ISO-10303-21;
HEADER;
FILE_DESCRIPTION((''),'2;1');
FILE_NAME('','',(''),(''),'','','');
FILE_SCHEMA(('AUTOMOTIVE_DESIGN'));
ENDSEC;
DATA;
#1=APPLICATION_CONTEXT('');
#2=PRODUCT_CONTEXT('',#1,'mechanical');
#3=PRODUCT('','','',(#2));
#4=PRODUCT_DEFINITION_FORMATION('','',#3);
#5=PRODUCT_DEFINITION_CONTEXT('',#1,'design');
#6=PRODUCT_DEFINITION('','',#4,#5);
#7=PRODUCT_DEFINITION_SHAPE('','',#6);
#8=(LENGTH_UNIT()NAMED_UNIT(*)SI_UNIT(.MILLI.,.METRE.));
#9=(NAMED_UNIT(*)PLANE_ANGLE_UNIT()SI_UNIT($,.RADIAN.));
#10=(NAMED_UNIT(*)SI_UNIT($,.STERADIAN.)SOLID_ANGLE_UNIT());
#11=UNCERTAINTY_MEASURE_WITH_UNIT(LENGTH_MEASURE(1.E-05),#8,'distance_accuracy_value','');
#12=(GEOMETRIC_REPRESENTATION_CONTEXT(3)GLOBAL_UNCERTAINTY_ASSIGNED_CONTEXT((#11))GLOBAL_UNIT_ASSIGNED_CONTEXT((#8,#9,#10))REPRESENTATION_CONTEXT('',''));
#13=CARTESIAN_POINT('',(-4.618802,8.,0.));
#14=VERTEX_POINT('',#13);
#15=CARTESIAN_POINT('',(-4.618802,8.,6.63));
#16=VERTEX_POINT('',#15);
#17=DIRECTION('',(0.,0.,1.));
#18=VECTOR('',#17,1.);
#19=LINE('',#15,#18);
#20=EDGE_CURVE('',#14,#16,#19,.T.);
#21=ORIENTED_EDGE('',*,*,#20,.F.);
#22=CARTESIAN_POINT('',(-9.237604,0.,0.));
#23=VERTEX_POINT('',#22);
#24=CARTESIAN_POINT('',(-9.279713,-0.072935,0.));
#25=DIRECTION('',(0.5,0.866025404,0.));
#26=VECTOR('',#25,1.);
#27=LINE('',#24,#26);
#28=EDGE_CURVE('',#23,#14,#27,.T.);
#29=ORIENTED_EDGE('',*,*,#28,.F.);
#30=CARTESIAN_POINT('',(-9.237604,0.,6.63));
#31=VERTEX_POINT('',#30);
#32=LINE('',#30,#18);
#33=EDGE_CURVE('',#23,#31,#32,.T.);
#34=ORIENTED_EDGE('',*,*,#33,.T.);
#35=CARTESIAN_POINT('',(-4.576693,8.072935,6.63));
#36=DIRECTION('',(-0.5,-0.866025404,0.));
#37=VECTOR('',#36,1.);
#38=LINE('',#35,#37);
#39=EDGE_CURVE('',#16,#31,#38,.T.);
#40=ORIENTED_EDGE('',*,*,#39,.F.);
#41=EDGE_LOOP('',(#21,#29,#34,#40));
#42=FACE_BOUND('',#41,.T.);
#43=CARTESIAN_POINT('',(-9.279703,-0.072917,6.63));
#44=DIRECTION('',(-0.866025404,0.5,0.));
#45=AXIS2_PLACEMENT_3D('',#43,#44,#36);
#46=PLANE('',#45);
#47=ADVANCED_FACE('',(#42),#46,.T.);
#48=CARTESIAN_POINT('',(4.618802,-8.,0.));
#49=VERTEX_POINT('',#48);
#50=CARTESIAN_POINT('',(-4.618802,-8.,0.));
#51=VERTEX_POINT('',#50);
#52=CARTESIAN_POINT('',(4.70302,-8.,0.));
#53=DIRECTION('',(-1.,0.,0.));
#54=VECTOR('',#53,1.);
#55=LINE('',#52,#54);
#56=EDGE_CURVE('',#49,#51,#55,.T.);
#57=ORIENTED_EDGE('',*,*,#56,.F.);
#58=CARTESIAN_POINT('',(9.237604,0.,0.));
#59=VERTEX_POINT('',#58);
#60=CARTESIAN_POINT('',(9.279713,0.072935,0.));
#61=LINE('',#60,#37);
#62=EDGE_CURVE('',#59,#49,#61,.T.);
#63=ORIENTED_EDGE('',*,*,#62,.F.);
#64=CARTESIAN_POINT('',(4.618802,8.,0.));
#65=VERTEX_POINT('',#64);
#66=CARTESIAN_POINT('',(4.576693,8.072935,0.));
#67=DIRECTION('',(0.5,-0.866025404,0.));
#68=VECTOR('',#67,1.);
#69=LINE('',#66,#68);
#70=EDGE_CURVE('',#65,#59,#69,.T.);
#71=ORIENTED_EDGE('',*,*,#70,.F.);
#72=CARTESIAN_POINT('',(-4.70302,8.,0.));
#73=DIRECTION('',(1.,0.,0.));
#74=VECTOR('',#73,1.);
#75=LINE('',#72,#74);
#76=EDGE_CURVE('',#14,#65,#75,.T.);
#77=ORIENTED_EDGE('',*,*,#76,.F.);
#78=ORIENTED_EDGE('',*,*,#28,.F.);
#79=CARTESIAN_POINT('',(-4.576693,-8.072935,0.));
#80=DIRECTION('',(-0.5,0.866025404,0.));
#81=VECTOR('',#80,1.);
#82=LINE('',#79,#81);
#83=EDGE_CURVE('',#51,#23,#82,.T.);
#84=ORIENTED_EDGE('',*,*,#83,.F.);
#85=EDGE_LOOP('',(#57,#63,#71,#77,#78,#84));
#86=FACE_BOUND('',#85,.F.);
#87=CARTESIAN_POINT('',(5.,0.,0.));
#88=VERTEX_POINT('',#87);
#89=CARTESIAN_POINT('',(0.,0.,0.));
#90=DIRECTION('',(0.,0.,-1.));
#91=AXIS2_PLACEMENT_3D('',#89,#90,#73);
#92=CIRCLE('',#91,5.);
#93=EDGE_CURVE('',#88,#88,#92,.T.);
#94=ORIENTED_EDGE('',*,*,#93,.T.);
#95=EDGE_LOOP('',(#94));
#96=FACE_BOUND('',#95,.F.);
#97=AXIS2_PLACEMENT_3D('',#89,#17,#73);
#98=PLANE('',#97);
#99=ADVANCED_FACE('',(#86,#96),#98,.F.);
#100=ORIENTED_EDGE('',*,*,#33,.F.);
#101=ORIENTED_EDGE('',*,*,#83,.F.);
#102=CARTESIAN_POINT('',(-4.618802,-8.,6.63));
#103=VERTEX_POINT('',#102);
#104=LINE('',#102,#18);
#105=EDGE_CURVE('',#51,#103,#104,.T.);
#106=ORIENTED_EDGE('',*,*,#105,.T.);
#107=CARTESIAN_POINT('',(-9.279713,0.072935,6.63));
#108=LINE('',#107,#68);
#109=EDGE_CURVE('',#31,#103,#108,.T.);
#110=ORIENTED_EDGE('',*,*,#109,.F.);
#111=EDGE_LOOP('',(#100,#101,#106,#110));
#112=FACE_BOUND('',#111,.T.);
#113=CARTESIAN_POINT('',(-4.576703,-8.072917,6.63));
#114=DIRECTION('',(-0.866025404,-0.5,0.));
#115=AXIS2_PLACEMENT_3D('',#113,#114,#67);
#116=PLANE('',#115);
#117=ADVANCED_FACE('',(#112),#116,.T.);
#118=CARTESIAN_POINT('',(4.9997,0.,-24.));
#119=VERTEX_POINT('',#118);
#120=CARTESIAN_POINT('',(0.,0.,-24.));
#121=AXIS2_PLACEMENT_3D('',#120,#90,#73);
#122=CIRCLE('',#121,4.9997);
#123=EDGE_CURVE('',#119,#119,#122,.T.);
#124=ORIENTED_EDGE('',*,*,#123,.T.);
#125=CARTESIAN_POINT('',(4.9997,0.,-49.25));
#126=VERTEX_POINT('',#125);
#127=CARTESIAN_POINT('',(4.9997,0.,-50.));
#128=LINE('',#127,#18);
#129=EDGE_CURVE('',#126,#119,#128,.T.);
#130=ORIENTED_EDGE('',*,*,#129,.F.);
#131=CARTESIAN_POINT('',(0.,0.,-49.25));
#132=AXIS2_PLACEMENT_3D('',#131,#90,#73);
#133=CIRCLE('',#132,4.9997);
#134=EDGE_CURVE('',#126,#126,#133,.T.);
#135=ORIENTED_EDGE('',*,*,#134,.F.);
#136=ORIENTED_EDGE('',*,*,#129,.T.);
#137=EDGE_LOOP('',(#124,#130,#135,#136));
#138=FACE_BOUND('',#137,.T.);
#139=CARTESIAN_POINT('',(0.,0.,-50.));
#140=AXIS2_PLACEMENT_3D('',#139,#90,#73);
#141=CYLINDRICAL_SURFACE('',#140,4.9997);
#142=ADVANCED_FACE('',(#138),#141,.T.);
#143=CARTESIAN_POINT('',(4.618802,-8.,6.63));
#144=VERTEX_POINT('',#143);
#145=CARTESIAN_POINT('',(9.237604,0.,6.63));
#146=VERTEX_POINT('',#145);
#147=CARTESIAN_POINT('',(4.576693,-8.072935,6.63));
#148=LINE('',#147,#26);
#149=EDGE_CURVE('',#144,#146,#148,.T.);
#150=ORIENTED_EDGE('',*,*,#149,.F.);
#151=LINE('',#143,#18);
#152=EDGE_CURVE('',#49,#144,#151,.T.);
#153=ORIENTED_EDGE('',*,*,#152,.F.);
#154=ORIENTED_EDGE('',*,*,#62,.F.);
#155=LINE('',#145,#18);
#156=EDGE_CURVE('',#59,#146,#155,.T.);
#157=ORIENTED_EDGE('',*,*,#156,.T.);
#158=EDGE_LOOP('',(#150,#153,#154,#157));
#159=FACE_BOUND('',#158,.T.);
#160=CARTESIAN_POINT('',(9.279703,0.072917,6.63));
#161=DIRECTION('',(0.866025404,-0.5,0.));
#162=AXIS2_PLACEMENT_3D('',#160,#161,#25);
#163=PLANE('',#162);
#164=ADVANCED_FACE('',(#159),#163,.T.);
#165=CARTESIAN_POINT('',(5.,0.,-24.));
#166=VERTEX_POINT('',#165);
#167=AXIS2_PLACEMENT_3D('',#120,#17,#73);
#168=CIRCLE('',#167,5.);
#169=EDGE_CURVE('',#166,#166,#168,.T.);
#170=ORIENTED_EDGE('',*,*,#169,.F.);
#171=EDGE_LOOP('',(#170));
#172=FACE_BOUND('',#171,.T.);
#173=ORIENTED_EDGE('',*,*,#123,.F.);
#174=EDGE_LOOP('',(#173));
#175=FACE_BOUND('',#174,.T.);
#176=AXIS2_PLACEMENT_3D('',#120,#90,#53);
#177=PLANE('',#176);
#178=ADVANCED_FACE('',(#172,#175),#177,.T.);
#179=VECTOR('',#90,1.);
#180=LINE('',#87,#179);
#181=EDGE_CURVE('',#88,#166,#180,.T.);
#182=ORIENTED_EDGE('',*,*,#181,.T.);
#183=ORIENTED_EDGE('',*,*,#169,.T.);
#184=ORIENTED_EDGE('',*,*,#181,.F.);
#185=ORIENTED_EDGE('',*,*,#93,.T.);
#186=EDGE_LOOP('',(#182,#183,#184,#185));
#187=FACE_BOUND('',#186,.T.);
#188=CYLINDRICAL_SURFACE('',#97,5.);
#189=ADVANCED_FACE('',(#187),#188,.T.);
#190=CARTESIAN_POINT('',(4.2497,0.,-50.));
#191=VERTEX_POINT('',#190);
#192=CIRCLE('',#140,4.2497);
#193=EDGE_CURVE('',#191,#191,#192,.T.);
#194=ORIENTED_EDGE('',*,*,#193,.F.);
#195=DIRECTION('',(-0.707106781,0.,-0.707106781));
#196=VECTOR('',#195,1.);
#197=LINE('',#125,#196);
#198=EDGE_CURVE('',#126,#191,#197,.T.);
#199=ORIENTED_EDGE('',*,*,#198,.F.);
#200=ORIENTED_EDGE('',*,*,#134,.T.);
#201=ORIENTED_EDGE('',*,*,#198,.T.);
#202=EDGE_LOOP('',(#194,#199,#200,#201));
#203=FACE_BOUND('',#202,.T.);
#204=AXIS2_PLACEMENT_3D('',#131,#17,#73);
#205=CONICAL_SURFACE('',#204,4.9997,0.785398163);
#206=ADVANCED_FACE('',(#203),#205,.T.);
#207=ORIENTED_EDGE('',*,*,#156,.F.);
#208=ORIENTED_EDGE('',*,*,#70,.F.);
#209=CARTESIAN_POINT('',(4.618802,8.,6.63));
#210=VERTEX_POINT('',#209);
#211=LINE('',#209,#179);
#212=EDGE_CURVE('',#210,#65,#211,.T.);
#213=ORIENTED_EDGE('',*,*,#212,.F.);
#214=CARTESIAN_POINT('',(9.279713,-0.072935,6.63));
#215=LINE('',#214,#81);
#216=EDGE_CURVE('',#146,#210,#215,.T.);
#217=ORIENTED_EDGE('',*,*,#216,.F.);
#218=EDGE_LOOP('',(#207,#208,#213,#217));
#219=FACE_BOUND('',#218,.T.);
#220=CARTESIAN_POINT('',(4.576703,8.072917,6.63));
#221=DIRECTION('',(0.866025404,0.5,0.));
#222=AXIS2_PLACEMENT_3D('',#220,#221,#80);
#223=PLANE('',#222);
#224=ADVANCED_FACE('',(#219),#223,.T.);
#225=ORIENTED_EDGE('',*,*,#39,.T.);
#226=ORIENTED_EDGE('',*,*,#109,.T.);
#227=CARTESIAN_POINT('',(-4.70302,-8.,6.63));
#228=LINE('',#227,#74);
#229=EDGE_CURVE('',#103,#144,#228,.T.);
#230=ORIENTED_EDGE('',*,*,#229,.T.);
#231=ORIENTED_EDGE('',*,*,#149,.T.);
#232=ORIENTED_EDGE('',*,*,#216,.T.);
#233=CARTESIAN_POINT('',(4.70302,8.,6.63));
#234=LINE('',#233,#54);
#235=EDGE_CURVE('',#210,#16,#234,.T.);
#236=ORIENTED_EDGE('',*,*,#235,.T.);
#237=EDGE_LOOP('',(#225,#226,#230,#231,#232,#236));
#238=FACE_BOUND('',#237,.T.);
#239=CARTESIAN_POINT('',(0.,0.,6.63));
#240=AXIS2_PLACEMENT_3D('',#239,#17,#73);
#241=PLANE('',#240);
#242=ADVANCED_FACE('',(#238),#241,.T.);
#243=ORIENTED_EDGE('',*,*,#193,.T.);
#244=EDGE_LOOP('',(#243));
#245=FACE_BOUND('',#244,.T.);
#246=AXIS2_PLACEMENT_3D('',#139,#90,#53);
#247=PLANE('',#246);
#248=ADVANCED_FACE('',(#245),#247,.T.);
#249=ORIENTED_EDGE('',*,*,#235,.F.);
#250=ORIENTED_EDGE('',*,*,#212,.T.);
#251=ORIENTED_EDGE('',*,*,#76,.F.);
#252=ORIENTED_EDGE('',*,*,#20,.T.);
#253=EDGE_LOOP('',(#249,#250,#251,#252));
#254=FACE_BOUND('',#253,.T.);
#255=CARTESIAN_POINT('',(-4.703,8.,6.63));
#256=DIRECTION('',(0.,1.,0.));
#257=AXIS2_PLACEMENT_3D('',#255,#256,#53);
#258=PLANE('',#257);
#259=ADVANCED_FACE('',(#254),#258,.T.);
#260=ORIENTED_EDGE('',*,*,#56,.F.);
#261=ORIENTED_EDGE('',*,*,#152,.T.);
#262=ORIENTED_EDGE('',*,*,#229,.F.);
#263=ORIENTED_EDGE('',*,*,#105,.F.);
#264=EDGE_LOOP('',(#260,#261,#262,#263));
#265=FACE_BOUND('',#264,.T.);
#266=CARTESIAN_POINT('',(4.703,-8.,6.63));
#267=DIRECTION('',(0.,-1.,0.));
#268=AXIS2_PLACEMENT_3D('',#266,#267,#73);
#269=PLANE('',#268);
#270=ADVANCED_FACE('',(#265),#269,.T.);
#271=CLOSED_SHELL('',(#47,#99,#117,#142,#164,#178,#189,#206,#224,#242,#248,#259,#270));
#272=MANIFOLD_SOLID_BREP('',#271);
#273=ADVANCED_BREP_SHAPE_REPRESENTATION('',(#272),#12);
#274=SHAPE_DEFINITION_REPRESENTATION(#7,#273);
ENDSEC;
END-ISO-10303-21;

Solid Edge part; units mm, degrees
sketch "Sketch1" plane through (0, 0, 0) normal (0, 0, 1) x (1, 0, 0)
  circle A0 centre (0, 0) radius 9.28
  dimension "D1" = 18.56
extrude "Protrusion1" add sketch "Sketch1" along normal blind 6.63
sketch "Sketch2" plane through (0, 0, 0) normal (0, 0, -1) x (1, 0, 0)
  circle A0 centre (0, 0) radius 5
extrude "Protrusion2" add sketch "Sketch2" along normal blind 50
sketch "Sketch3" plane through (0, 0, -50) normal (0, 0, -1) x (1, 0, 0)
  circle A0 centre (0, 0) radius 4.9997
extrude "Cutout1" cut sketch "Sketch3" against normal blind 26 flip side to cut
chamfer "Chamfer_1" distance 0.75 angle 45 1 edges at (-4.9997, 0, -50)
sketch "Sketch4" plane through (0, 0, 6.63) normal (0, 0, 1) x (1, 0, 0)
  line L0 (-4.703, 8) -> (4.703, 8)
  dimension "D1" = 16
extrude "Cutout2" cut sketch "Sketch4" against normal up to next material side at (0, 8.05, 6.63)
pattern_circular "Pattern1" count 6 over 360 about axis through (0, 0, 6.63) along (0, 0, 1) of "Cutout2"
properties part number "107229"
